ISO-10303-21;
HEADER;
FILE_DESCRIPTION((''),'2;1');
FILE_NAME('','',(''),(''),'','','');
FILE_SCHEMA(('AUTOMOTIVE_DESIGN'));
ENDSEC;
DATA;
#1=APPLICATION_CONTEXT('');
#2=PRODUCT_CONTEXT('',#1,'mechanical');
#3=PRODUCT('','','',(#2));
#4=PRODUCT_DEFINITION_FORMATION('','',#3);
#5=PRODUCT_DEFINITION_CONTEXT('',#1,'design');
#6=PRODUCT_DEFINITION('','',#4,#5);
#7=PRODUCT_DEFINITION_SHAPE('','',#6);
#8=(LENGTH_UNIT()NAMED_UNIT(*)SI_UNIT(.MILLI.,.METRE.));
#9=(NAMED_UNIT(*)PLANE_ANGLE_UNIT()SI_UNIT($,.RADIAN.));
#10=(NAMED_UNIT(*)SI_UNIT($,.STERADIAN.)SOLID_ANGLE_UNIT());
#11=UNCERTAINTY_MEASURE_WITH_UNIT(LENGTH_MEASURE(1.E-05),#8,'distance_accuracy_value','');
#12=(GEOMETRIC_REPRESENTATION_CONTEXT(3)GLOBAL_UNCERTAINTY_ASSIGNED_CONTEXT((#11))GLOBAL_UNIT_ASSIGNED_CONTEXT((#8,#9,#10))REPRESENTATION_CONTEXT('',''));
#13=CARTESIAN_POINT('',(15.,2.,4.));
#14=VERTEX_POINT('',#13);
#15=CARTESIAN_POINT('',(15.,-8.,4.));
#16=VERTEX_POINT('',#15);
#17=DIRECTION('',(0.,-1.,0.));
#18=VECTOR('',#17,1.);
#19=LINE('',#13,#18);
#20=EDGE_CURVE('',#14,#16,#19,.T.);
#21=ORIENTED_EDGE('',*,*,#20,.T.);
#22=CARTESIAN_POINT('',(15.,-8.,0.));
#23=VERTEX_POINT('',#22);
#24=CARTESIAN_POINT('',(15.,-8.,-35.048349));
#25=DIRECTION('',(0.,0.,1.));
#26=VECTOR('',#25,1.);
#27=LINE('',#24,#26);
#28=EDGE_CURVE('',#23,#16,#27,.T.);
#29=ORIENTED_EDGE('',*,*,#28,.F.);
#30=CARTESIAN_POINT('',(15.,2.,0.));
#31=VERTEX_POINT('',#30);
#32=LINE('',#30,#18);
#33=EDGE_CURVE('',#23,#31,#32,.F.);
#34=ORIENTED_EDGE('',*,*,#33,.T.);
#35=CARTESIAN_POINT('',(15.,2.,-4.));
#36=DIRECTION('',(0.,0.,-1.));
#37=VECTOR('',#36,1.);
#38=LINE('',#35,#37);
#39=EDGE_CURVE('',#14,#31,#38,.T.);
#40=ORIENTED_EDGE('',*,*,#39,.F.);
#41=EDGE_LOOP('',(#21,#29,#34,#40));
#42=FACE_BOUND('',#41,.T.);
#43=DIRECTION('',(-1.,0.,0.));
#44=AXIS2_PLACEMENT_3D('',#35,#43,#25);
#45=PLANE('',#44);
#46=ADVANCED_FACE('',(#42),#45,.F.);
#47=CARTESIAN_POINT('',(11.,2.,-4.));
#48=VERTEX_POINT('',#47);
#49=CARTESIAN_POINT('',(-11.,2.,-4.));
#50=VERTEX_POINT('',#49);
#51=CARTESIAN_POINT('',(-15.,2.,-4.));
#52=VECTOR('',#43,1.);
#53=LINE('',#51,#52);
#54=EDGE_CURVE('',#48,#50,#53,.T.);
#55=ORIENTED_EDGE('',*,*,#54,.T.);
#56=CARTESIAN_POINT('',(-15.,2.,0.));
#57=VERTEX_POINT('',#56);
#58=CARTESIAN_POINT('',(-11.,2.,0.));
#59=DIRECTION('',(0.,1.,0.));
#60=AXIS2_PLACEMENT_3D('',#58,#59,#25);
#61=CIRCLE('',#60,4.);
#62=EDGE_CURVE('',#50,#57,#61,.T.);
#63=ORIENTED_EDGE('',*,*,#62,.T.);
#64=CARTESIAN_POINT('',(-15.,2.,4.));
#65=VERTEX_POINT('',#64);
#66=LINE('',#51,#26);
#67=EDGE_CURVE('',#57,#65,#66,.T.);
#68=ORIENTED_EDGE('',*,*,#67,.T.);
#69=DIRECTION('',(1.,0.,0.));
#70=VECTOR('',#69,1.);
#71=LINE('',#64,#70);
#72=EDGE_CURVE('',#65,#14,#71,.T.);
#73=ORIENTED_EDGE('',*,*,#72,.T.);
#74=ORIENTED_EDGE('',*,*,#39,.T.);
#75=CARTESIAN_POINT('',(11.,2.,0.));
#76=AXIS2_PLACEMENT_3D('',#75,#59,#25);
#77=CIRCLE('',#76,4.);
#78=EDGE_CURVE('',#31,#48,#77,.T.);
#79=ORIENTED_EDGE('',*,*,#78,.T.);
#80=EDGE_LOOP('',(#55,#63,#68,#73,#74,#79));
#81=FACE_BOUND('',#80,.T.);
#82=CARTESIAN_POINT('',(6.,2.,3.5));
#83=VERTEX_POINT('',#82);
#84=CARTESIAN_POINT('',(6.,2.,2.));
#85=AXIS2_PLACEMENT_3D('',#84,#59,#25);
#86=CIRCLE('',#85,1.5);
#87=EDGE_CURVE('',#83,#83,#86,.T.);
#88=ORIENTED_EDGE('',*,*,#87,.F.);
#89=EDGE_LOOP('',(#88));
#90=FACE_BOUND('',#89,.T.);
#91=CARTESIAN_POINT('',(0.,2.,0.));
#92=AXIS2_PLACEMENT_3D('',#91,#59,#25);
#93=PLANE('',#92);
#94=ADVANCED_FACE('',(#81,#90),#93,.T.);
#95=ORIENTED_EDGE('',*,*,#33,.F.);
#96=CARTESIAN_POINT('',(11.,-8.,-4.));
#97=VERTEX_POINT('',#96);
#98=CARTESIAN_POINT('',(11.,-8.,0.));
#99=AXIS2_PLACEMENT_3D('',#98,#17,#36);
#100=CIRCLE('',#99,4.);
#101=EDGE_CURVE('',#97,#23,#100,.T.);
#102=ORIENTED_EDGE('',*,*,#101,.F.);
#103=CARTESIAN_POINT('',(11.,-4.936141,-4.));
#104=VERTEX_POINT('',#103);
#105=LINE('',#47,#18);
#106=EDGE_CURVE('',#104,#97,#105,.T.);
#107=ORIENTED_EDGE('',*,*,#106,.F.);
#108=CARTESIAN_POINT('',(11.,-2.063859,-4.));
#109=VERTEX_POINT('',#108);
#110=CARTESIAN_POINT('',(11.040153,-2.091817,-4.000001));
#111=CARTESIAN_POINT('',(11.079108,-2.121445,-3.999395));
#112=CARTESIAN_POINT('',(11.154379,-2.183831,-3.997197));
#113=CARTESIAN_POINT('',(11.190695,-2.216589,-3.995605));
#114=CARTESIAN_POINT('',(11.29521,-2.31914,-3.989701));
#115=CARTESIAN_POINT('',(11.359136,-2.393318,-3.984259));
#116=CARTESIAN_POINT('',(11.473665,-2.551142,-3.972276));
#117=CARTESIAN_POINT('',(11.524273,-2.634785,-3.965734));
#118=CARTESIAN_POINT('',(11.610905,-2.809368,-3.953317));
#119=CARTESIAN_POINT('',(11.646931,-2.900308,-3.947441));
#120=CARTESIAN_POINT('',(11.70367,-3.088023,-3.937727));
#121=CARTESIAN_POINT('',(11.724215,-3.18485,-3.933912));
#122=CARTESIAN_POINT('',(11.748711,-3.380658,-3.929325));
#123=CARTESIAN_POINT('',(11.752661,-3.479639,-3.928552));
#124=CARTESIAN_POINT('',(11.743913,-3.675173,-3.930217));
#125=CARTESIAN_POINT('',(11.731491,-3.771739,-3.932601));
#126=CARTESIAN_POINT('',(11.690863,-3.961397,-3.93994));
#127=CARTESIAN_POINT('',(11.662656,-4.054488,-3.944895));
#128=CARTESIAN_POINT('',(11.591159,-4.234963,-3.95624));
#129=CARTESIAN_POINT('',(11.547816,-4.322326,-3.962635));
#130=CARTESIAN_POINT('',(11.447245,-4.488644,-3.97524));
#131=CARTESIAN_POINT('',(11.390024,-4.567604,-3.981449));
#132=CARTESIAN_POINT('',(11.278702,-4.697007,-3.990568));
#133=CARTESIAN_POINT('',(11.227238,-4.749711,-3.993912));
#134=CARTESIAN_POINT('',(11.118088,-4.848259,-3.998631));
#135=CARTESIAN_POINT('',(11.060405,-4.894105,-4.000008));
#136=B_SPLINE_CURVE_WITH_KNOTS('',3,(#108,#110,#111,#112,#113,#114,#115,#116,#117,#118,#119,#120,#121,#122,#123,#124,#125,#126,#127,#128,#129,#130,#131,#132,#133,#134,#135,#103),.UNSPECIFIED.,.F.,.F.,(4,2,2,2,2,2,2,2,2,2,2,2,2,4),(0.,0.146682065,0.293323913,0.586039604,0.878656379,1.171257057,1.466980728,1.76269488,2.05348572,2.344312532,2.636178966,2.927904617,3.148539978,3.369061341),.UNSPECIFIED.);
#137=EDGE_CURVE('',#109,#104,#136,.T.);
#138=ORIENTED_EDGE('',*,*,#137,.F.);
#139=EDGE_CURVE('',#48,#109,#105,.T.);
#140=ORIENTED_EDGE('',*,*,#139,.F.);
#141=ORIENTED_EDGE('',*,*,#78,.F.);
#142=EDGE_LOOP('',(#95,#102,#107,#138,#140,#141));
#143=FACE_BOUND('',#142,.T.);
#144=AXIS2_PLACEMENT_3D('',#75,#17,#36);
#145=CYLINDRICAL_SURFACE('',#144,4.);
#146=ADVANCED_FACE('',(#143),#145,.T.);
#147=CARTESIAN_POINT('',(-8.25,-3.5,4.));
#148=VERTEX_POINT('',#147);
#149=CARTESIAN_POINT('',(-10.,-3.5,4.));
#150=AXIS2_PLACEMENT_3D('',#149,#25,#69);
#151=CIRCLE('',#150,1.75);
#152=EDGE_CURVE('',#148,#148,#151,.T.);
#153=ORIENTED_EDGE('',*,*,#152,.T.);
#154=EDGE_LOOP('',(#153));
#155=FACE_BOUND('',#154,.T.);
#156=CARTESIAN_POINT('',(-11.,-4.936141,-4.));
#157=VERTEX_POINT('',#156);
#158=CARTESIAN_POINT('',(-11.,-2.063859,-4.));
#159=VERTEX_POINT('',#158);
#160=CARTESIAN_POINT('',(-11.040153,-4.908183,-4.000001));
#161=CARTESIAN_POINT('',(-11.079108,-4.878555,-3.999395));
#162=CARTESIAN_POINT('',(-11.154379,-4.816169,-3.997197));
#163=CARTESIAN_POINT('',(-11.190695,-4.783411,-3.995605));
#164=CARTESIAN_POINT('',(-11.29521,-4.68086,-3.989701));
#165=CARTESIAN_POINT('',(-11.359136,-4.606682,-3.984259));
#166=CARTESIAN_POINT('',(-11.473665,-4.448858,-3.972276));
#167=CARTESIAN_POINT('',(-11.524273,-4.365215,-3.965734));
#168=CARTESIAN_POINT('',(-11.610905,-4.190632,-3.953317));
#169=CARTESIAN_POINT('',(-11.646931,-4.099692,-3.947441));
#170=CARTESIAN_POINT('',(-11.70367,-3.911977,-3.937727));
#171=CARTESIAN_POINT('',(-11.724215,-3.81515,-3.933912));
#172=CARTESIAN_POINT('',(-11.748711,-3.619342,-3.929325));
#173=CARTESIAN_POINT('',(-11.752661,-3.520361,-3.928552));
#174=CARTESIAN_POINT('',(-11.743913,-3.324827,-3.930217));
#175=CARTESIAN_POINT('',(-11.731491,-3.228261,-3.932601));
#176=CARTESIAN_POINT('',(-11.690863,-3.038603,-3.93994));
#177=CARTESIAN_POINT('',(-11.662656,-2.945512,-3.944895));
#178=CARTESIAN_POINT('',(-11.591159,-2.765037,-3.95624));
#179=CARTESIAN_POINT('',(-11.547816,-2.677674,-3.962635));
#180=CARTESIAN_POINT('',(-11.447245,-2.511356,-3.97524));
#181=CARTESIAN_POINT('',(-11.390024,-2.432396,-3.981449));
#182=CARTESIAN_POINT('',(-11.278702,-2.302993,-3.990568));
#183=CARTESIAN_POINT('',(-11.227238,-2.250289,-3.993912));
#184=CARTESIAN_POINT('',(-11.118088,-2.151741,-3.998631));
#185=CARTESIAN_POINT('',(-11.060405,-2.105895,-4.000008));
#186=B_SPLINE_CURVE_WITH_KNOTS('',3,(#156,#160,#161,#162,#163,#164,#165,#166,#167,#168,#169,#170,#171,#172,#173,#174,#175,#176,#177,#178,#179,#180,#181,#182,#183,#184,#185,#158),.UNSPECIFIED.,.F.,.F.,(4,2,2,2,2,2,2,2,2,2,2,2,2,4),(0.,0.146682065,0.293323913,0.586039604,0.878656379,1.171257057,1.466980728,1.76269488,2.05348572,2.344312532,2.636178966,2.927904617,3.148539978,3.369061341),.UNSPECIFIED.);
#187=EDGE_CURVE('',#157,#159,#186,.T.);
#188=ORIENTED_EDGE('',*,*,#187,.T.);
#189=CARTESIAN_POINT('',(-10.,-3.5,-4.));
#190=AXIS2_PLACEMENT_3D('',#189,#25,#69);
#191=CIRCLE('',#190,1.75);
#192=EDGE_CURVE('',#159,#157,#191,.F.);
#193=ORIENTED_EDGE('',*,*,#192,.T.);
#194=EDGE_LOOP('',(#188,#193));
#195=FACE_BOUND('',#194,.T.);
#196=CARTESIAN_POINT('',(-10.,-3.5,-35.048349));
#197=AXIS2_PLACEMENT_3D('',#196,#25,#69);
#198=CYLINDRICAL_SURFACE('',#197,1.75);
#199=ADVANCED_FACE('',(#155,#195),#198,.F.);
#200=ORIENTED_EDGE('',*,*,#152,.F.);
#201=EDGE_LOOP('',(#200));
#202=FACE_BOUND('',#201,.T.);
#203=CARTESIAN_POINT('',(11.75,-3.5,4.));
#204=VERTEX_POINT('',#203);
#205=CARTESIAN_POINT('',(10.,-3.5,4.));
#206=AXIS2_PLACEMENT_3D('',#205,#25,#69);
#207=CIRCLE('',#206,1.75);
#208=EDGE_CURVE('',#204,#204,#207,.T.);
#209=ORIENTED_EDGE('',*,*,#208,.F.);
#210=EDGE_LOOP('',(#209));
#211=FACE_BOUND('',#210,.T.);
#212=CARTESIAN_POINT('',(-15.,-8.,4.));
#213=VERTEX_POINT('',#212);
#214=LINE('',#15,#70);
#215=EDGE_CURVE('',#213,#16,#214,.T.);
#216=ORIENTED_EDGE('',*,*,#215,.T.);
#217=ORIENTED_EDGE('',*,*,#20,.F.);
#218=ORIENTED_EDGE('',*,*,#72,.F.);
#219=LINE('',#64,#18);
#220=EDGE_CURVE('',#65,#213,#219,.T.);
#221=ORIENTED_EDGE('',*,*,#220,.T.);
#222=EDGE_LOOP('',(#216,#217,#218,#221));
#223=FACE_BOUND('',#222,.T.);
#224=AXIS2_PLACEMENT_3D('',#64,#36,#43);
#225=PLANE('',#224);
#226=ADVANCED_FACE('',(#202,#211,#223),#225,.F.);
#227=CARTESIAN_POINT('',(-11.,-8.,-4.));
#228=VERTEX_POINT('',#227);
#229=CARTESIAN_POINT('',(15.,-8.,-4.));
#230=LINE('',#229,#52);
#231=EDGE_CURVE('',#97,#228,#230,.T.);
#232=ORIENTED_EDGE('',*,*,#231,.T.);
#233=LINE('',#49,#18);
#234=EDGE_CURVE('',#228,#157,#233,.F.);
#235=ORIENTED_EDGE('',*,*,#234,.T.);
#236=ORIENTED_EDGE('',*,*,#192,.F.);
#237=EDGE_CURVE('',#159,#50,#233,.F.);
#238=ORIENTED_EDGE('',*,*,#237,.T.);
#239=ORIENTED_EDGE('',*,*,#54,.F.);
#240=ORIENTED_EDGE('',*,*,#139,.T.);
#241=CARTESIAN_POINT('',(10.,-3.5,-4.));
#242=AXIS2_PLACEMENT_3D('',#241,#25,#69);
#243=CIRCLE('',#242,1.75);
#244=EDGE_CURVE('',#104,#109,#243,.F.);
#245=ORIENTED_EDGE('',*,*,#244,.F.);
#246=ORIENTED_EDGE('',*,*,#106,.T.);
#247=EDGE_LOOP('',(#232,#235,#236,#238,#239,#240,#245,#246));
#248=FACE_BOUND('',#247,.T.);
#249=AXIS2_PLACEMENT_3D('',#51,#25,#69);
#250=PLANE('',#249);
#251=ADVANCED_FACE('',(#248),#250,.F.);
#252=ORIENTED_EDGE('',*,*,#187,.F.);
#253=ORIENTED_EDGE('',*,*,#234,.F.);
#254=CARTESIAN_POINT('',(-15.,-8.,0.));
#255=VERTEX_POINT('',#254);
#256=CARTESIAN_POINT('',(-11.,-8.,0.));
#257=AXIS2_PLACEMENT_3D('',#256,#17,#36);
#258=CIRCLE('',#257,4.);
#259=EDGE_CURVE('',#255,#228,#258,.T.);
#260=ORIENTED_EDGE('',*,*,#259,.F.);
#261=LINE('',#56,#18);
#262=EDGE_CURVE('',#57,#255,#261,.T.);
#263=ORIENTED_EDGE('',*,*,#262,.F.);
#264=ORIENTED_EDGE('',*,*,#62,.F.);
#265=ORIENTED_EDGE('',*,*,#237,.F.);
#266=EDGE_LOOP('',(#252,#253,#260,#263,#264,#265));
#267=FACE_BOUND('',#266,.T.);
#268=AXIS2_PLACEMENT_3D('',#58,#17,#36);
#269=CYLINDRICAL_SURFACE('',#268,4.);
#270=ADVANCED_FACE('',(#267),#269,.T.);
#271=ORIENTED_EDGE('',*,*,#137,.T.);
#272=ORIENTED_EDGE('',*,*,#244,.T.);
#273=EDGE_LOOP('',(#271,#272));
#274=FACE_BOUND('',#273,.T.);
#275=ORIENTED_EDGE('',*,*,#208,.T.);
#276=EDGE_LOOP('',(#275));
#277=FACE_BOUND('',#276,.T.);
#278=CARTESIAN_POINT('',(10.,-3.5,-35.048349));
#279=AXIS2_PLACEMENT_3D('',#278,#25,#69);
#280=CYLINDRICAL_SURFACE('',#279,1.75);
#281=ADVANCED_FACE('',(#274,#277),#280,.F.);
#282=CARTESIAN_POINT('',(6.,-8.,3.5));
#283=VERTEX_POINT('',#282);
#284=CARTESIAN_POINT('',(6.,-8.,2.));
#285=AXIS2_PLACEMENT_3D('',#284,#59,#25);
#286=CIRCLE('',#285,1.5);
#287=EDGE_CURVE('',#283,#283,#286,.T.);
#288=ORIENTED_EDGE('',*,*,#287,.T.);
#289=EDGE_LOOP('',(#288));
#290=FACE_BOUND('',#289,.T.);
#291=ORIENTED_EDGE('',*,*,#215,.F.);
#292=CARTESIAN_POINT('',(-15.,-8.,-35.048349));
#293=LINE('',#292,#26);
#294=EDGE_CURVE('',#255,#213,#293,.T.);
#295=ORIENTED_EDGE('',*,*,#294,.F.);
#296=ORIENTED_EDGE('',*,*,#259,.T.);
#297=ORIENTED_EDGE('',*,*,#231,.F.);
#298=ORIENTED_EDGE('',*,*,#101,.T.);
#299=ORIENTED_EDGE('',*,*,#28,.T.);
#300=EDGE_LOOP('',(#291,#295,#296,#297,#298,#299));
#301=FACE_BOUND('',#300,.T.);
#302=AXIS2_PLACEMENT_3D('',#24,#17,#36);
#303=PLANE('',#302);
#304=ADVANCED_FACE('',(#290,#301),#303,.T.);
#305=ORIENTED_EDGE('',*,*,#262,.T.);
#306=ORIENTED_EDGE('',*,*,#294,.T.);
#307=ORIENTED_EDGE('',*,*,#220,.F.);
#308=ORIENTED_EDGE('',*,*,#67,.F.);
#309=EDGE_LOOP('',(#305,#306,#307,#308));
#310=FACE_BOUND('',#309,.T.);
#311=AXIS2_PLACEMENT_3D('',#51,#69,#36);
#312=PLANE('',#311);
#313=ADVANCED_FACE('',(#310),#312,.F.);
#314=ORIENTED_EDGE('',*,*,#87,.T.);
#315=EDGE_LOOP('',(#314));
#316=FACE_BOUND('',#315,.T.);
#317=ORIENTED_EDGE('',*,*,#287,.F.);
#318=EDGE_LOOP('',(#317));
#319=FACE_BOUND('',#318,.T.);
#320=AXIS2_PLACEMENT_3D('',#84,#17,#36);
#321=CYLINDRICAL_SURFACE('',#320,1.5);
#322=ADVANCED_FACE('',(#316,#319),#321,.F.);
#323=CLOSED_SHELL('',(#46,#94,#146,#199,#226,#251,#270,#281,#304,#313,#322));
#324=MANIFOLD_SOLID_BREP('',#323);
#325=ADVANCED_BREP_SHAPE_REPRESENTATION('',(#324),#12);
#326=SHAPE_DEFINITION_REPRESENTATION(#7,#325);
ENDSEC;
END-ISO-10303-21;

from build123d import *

# Parameters (mm, degrees)
SKETCH1_W           = 30
SKETCH1_H           = 8
SKETCH1_R           = 1.5
BOSS_EXTRUDE1_DEPTH = 2
SKETCH2_R           = 1.75
BOSS_EXTRUDE2_DEPTH = 8
SKETCH4_R           = 1.5
CUT_EXTRUDE2_DEPTH  = 18.464249197
FILLET1_R           = 4


with BuildPart() as part:
    # Sketch1 → Boss-Extrude1 (new body)
    with BuildSketch(Plane(origin=(0, 0, 0), x_dir=(1, 0, 0), z_dir=(0, 1, 0))):
        Rectangle(SKETCH1_W, SKETCH1_H)
        with Locations(Location((6, -2, 0), (0, 0, 270))):
            Circle(SKETCH1_R, mode=Mode.SUBTRACT)
    extrude(amount=BOSS_EXTRUDE1_DEPTH)

    # Sketch2 → Boss-Extrude2 (add)
    with BuildSketch(Plane.XY.offset(4)):
        Polygon((-15, 0), (-15, -8), (15, -8), (15, 0), (5, 0), align=None)
        with Locations((-10, -3.5)):
            Circle(SKETCH2_R, mode=Mode.SUBTRACT)
        with Locations((10, -3.5)):
            Circle(SKETCH2_R, mode=Mode.SUBTRACT)
    extrude(amount=-BOSS_EXTRUDE2_DEPTH)

    # Sketch4 → Cut-Extrude2 (cut, through all)
    with BuildSketch(Plane(origin=(0, 0, 0), x_dir=(1, 0, 0), z_dir=(0, 1, 0))):
        with Locations(Location((6, -2, 0), (0, 0, 270))):
            Circle(SKETCH4_R)
    extrude(amount=-CUT_EXTRUDE2_DEPTH, mode=Mode.SUBTRACT)

    # Fillet1
    # the kernel refuses this fillet: 4 mm, written as the material it takes off along each edge
    with BuildSketch(Plane(origin=(-15, -18, -4), x_dir=(1, 0, 0), z_dir=(0, 1, 0)), Plane(origin=(15, 12, -4), x_dir=(-1, 0, 0), z_dir=(0, -1, 0))) as fillet1_piece_1:
        with BuildLine():
            CenterArc((FILLET1_R, -FILLET1_R), FILLET1_R, 90, 90)
            Line((0, -FILLET1_R), (0, 0))
            Line((0, 0), (FILLET1_R, 0))
        make_face()
    extrude(amount=30, mode=Mode.SUBTRACT)


solid = part.part
